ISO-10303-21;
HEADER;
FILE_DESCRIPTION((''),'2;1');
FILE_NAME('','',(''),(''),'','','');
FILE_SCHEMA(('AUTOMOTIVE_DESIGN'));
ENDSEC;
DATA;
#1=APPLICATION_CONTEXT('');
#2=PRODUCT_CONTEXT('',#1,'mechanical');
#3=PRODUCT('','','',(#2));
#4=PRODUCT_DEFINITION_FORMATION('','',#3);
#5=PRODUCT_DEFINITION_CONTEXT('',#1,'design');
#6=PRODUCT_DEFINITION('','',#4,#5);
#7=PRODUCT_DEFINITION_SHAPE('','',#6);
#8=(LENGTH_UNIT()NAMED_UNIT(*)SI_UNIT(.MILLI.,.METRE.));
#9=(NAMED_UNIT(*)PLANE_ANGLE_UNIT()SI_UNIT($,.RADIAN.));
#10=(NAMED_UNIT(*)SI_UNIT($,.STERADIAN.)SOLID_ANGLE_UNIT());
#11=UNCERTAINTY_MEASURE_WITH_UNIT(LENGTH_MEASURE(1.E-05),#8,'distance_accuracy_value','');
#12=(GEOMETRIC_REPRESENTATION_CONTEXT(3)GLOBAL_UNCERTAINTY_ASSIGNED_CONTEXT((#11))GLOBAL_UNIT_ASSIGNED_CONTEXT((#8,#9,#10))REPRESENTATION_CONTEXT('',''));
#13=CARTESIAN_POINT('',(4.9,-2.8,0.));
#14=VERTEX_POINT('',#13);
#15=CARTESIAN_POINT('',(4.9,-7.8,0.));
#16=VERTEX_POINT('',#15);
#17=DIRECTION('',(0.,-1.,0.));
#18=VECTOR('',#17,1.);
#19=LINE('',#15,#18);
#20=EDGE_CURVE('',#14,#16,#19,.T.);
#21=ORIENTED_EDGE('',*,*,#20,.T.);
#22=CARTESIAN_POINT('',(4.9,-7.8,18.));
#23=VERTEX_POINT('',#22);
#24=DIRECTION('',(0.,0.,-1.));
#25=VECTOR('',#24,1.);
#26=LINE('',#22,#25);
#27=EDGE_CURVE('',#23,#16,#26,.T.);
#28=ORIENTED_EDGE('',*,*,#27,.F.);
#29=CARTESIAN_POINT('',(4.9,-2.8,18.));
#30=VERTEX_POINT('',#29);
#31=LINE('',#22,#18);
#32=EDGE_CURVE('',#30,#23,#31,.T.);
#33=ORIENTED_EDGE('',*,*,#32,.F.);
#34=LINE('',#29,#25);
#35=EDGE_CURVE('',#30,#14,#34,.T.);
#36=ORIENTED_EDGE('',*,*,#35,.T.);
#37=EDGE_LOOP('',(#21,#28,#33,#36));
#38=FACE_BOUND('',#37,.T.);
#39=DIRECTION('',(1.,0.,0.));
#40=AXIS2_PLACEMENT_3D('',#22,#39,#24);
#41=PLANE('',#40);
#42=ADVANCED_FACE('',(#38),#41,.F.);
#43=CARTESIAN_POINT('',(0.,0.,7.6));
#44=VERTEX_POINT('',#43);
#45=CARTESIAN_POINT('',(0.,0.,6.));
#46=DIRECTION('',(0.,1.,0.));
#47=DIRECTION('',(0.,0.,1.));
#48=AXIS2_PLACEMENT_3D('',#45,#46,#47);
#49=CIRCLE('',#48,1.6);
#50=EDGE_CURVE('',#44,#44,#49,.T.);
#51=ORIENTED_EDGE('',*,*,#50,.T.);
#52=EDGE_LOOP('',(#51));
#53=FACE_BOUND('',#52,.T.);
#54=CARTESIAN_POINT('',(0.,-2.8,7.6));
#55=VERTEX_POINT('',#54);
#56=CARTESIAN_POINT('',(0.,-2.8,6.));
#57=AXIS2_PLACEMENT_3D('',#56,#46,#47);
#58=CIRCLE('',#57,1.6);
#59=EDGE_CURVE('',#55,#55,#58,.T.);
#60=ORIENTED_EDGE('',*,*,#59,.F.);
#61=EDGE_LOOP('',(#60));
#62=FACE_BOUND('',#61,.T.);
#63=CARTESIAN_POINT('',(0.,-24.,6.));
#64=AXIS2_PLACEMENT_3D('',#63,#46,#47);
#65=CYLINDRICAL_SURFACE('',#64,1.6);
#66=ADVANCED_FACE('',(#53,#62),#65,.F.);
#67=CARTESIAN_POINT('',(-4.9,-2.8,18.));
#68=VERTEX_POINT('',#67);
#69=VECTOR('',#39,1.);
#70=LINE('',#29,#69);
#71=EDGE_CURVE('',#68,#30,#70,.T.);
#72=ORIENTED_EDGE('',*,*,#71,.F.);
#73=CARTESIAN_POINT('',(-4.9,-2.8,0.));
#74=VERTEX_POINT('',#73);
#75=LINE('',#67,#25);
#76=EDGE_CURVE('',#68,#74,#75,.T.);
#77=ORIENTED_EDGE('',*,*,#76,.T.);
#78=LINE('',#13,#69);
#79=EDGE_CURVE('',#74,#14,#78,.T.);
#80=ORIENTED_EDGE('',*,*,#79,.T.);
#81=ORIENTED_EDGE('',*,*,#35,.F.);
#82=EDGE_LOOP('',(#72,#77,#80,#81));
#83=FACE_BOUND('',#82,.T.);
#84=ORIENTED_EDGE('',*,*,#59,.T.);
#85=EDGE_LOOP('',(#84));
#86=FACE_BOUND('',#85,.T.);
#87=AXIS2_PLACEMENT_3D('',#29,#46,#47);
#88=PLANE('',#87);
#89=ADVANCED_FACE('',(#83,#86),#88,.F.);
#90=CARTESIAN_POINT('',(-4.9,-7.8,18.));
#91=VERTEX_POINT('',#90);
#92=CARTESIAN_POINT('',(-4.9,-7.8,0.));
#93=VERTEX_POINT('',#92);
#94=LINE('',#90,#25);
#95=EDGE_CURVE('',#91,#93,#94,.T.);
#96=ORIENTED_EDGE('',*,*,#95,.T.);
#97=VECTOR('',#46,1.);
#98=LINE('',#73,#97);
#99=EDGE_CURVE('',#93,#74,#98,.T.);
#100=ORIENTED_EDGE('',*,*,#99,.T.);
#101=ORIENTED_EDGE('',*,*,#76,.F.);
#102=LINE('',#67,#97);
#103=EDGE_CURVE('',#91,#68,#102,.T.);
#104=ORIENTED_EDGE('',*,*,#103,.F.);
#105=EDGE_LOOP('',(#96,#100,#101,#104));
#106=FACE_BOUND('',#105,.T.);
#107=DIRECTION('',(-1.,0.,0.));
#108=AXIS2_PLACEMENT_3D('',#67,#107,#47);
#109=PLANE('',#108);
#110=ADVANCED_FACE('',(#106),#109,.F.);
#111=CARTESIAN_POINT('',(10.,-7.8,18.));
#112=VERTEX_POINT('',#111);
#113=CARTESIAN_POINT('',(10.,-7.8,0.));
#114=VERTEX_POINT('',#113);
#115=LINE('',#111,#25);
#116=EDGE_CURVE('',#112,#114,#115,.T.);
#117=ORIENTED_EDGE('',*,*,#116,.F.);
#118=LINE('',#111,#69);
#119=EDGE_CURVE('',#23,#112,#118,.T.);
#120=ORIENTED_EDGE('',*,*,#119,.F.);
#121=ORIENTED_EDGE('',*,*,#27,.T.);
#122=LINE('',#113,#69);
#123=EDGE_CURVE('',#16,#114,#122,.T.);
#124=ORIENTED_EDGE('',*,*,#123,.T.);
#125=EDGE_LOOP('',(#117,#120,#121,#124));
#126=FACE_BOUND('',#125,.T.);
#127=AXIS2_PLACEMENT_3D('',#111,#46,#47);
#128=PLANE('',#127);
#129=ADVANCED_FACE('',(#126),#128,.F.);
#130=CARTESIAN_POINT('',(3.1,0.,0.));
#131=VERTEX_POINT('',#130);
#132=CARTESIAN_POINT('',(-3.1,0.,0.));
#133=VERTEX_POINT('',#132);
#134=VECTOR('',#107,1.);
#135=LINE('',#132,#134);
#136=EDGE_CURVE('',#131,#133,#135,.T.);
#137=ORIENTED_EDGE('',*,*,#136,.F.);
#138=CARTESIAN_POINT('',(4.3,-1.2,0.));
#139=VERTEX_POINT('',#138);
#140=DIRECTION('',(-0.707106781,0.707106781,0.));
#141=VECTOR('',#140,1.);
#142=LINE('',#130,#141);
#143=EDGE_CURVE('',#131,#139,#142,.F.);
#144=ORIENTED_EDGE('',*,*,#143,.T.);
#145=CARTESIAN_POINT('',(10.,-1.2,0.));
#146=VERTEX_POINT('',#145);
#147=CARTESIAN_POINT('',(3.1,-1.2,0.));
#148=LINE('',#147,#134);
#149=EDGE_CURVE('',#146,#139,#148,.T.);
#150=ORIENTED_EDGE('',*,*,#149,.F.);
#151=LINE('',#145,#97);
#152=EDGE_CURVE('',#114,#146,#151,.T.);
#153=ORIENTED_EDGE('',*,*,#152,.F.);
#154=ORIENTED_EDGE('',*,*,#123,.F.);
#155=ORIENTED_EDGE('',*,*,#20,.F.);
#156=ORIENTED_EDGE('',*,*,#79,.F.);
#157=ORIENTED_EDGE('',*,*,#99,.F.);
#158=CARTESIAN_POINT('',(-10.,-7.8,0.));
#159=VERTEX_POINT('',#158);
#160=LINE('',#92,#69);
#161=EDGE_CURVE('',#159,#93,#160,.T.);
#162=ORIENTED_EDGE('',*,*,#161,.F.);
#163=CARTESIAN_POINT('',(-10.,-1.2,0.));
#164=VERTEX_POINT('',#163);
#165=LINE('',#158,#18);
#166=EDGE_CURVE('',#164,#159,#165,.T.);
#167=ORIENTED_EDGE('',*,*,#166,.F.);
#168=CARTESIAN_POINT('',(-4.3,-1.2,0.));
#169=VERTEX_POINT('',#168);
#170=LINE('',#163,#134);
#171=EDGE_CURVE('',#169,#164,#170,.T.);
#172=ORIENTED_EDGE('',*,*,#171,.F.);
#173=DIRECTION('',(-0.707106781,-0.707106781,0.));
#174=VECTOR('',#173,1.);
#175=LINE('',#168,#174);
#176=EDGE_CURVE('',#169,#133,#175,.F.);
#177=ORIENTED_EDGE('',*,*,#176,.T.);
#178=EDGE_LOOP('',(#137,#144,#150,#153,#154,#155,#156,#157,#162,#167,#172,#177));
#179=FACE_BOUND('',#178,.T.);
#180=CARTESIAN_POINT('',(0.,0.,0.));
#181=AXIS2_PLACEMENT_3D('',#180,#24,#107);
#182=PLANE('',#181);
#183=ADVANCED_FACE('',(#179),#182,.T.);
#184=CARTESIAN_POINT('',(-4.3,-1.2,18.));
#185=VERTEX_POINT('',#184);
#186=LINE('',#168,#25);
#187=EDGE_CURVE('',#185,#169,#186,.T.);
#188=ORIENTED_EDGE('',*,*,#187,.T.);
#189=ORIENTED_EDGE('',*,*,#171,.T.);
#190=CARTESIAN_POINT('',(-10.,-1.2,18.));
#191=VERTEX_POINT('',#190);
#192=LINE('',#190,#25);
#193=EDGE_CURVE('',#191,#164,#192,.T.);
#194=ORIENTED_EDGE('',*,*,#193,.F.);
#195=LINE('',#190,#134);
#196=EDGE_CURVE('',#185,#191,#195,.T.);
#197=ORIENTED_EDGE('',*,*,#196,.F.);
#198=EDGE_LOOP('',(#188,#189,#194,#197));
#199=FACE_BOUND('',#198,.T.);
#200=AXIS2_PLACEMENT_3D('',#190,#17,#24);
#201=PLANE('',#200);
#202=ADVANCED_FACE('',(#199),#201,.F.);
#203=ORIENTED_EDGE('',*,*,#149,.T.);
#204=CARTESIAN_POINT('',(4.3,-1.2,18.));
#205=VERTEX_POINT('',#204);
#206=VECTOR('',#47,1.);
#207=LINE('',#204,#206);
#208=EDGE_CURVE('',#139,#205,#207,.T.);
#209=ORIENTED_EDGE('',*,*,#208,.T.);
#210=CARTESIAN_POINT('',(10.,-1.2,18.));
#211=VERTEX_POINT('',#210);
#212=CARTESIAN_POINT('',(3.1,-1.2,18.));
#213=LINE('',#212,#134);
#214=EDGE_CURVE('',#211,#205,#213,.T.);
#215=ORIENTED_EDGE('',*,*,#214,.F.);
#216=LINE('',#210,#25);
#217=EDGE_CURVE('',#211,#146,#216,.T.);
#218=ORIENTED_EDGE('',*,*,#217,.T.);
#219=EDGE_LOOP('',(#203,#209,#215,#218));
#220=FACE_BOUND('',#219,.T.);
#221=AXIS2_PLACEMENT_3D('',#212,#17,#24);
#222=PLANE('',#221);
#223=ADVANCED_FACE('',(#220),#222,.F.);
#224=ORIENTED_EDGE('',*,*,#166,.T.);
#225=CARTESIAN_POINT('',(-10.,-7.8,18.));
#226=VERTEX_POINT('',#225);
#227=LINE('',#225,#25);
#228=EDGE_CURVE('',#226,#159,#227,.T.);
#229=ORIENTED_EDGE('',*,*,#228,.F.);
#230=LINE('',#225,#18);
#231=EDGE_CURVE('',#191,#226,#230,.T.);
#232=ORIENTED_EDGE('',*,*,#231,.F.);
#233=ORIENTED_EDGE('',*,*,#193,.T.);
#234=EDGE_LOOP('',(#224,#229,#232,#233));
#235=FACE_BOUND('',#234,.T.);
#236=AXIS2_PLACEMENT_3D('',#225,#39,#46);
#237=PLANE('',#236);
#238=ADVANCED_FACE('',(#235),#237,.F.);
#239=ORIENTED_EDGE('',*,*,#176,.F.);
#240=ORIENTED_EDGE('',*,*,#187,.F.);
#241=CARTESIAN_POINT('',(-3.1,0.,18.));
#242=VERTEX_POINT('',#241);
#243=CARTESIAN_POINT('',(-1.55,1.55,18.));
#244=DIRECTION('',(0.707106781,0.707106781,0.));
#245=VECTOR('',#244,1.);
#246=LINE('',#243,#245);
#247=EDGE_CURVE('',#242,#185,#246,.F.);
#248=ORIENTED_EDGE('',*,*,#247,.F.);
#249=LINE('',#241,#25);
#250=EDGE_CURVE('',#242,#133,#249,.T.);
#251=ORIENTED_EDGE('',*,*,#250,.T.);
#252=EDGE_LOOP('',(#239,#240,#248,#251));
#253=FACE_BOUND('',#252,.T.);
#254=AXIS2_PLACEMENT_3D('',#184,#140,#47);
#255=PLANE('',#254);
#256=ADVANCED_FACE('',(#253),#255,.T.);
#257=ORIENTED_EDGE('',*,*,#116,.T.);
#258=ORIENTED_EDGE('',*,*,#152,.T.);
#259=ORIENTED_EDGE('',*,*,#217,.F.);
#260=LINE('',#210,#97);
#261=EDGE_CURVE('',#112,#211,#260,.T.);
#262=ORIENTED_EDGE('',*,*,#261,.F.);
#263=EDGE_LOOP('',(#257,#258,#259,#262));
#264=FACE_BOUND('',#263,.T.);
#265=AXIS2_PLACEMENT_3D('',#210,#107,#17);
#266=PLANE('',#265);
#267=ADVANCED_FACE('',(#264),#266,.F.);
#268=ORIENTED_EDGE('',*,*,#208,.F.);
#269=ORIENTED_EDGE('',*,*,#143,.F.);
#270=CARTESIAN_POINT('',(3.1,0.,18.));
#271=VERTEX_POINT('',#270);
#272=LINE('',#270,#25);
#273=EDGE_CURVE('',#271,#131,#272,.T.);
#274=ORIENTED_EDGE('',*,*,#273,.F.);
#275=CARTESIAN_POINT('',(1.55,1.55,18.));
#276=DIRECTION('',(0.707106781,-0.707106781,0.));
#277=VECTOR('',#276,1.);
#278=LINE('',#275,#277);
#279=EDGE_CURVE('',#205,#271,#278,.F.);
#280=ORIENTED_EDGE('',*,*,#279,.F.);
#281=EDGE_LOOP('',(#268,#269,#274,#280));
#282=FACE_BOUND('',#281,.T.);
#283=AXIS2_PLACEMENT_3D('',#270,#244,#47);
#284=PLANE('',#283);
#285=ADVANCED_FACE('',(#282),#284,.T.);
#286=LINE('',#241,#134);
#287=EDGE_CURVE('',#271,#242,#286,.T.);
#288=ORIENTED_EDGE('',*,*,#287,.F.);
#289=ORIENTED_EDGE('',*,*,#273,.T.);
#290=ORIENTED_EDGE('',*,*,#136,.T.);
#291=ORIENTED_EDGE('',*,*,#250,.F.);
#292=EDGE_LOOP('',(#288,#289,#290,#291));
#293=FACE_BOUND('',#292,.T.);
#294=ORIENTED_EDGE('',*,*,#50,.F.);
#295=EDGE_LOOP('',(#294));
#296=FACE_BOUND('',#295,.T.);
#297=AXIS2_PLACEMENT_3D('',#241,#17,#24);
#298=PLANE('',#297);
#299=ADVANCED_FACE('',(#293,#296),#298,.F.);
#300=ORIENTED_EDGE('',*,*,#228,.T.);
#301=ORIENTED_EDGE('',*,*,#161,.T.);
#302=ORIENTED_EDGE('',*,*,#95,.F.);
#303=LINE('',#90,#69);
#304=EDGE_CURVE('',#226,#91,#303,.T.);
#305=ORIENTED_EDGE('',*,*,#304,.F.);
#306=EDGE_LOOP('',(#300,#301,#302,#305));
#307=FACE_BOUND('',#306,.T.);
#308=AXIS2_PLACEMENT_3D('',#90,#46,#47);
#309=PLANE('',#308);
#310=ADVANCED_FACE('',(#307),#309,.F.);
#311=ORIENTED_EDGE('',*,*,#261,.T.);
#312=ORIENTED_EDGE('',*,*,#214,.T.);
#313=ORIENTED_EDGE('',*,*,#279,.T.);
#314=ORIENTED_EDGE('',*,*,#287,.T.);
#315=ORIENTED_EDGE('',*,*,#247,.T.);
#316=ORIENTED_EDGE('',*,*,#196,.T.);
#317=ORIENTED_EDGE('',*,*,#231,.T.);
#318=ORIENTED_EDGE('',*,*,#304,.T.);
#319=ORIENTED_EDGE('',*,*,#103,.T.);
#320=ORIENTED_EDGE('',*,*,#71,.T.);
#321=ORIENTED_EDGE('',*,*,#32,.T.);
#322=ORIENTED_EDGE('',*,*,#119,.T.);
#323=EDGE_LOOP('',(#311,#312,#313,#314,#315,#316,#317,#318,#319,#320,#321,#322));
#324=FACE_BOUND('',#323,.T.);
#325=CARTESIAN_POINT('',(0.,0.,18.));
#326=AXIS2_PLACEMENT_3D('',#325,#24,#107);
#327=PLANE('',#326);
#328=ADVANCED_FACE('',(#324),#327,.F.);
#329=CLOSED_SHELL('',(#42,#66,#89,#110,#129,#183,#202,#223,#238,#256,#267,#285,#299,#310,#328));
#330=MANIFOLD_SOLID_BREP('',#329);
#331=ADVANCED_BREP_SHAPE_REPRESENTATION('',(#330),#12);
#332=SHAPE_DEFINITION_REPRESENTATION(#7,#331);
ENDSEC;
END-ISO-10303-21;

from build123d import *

# Parameters (mm, degrees)
BOSS_EXTRUDE2_DEPTH = 18
SKETCH3_R           = 1.6
CUT_EXTRUDE1_DEPTH  = 24
CHAMFER1_SIZE       = 1.2


with BuildPart() as part:
    # Sketch2 → Boss-Extrude2 (new body)
    with BuildSketch(Plane.XY):
        Polygon((-3.1, 0), (3.1, 0), (3.1, -1.2), (10, -1.2), (10, -7.8), (4.9, -7.8), (4.9, -2.8), (-4.9, -2.8), (-4.9, -7.8), (-10, -7.8), (-10, -1.2), (-3.1, -1.2), align=None)
    extrude(amount=BOSS_EXTRUDE2_DEPTH)

    # Sketch3 → Cut-Extrude1 (cut)
    with BuildSketch(Plane(origin=(0, 0, 0), x_dir=(1, 0, 0), z_dir=(0, 1, 0))):
        with Locations(Location((0, -6, 0), (0, 0, 270))):
            Circle(SKETCH3_R)
    extrude(amount=-CUT_EXTRUDE1_DEPTH, mode=Mode.SUBTRACT)

    # Chamfer1
    chamfer1_edges = [part.edges().sort_by_distance(p)[0] for p in [
        (3.1, -1.2, 9),
        (-3.1, -1.2, 9),
    ]]
    chamfer(chamfer1_edges, length=CHAMFER1_SIZE - 0.0001)  # a hair under: the kernel refuses the full size


solid = part.part
